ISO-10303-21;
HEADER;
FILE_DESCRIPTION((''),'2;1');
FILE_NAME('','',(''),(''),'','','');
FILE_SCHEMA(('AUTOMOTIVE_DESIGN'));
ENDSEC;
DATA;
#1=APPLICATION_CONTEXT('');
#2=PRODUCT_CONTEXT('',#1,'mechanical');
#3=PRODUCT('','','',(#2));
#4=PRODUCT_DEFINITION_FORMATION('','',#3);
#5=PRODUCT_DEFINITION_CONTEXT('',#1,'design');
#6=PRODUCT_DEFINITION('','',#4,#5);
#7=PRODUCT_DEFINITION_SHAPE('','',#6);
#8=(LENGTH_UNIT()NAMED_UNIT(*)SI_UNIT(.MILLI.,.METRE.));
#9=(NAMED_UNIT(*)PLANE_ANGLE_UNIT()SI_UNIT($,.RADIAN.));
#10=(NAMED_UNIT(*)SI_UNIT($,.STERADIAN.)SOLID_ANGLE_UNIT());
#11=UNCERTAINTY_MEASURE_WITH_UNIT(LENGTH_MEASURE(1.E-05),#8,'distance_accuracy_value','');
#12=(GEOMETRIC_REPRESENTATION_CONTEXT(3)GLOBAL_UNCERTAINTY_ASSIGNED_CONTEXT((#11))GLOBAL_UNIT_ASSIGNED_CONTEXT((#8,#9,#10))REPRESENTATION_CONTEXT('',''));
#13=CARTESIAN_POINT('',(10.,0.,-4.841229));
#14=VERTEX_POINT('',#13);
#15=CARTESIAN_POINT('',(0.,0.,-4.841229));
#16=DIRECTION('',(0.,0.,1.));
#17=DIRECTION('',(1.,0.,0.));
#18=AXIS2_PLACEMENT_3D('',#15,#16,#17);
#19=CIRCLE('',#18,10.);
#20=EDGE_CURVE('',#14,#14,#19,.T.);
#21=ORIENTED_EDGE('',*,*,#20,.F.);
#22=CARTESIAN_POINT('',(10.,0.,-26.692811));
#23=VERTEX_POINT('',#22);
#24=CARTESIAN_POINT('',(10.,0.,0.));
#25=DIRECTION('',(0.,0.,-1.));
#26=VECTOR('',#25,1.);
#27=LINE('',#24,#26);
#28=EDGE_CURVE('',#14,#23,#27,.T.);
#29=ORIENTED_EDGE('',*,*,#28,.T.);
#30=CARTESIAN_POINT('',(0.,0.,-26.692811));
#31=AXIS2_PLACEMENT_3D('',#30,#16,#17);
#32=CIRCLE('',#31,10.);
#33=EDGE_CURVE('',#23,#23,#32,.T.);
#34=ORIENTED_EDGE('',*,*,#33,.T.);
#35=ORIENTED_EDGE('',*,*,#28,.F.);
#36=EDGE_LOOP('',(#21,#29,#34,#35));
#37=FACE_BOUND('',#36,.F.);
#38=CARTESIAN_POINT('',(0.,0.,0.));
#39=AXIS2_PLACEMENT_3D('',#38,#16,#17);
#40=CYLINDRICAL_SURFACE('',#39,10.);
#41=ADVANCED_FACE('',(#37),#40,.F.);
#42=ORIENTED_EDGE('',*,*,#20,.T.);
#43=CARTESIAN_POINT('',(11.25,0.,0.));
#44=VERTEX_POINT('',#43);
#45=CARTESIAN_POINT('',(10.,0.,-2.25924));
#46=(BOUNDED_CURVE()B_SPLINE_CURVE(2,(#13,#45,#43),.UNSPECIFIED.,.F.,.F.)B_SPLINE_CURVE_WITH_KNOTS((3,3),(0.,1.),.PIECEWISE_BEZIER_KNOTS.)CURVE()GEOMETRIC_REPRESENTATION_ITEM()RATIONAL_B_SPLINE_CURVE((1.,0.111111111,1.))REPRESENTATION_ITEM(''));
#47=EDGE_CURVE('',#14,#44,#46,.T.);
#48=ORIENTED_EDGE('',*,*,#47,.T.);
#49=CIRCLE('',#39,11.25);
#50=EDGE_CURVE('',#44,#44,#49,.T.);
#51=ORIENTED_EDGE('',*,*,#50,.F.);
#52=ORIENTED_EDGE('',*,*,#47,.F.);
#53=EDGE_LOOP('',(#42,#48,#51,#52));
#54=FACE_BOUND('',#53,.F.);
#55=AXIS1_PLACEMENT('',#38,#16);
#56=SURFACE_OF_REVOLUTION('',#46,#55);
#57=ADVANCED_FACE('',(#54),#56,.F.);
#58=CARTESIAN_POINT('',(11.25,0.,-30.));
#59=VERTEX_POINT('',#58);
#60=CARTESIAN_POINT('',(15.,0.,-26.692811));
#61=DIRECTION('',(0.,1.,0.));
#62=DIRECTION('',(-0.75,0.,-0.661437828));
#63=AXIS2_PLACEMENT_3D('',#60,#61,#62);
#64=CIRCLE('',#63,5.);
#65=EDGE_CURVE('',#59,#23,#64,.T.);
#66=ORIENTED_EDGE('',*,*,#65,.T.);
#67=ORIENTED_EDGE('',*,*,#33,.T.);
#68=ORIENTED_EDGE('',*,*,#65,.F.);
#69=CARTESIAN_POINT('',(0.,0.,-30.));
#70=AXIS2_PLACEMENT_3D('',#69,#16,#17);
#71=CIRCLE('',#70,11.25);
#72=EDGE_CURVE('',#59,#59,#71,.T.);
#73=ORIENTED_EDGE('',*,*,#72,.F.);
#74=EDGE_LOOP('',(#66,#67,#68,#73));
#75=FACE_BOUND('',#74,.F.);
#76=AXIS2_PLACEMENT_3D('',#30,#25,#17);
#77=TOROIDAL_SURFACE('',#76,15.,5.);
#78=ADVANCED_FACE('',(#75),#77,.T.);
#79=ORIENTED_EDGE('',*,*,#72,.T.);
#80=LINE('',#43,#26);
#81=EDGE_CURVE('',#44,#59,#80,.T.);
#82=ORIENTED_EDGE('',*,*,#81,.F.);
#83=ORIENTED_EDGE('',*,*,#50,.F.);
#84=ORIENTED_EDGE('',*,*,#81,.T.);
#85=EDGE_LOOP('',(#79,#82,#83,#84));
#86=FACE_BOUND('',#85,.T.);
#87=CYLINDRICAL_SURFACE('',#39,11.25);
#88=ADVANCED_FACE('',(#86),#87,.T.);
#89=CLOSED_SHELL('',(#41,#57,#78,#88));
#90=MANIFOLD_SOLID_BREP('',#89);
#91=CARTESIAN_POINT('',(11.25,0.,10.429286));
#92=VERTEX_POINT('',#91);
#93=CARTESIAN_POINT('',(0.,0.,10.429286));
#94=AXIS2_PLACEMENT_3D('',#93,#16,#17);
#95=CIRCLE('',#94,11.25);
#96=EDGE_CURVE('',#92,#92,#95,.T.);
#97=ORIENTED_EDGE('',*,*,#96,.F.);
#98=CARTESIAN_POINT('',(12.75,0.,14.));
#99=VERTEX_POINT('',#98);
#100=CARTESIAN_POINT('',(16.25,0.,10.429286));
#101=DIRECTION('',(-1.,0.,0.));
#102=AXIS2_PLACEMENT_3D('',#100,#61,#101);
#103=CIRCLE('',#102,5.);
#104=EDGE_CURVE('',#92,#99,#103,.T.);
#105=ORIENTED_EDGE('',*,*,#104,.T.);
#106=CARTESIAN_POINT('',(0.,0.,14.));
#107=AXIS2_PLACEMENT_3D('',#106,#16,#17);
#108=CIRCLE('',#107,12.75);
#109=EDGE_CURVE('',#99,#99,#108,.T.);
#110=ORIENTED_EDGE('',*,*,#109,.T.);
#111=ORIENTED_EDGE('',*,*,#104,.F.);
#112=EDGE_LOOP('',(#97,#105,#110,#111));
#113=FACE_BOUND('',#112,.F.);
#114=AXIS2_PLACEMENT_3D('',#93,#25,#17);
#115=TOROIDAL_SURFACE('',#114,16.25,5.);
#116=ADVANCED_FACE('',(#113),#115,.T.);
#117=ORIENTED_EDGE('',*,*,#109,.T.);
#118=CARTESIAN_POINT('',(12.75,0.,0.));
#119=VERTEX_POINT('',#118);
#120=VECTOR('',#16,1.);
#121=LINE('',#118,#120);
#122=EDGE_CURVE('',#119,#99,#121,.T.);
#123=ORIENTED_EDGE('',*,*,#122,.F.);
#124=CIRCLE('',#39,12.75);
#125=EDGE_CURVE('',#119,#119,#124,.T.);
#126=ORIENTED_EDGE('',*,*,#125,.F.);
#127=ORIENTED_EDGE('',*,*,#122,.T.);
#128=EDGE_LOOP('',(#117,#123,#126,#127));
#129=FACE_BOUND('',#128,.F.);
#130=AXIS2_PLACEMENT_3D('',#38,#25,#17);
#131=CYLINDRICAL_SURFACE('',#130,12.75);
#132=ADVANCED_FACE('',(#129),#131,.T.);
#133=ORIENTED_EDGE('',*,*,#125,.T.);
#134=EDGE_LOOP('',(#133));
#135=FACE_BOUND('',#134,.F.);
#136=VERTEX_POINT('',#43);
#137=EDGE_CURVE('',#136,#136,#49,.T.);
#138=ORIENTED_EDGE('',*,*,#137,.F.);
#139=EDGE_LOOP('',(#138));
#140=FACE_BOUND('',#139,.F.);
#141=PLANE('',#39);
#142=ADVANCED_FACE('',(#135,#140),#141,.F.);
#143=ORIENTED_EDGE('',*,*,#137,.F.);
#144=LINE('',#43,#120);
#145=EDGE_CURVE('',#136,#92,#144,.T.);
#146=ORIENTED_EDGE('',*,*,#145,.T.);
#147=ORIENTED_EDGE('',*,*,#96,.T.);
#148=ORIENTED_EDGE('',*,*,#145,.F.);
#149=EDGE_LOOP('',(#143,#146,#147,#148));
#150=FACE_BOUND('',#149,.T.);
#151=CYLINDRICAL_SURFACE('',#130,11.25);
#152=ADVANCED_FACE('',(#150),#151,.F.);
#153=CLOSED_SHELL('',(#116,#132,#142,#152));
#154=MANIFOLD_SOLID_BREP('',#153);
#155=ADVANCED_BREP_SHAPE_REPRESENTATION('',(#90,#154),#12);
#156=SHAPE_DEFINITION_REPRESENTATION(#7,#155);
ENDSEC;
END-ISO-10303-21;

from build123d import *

# Parameters (mm, degrees)
F0_R     = 12.75
F0_R_2   = 11.25
F1_DEPTH = 14
F2_R     = 11.25
F2_R_2   = 10
F3_DEPTH = 30


# Not quite as in the source:
# - a fillet or chamfer that OpenCascade refuses, or shapes differently, is made with other operations: its cross-section is extruded or revolved along the edge and cut away or added


with BuildPart() as f1:
    # F0 (on Top) → F1 (new body)
    with BuildSketch(Plane.XY):
        Circle(F0_R)
        Circle(F0_R_2, mode=Mode.SUBTRACT)
    extrude(amount=F1_DEPTH)

    # F5: fillet of radius 5 on 1 edges, made by hand

    # F5_s1 → F5_t2 (revolve, cut)
    with BuildSketch(Plane.XZ):
        with BuildLine():
            ThreePointArc((11.25, 10.4292857857), (11.6402277714, 12.3657774588), (12.75, 14))
            Line((12.75, 14), (11.25, 14))
            Line((11.25, 14), (11.25, 10.4292857857))
        make_face()
    revolve(axis=Axis((0, 0, 14), (0, 0, 1)), mode=Mode.SUBTRACT)


with BuildPart() as f3:
    # F2 (on Top) → F3 (new body)
    with BuildSketch(Plane.XY):
        Circle(F2_R)
        Circle(F2_R_2, mode=Mode.SUBTRACT)
    extrude(amount=-F3_DEPTH)

    # F4: fillet of radius 10 on 1 edges, made by hand

    # F4_s1 → F4_t2 (revolve, cut)
    with BuildSketch(Plane.XZ):
        with BuildLine():
            add(Edge.make_bspline(
                [(10, -4.8412291828), (10, -2.2592402853), (11.25, 0)],
                knots=[0, 0, 0, 1, 1, 1], degree=2, weights=[1, 0.1111111111, 1]))
            Line((11.25, 0), (10, 0))
            Line((10, 0), (10, -4.8412291828))
        make_face()
    revolve(axis=Axis((0, 0, 0), (0, 0, 1)), mode=Mode.SUBTRACT)

    # F6: fillet of radius 5 on 1 edges, made by hand

    # F6_s1 → F6_t2 (revolve, cut)
    with BuildSketch(Plane.XZ):
        with BuildLine():
            ThreePointArc((11.25, -30), (10.3229282665, -28.4605778141), (10, -26.6928108612))
            Line((10, -26.6928108612), (10, -30))
            Line((10, -30), (11.25, -30))
        make_face()
    revolve(axis=Axis((0, 0, -30), (0, 0, 1)), mode=Mode.SUBTRACT)


solid = Compound([f1.part, f3.part])
